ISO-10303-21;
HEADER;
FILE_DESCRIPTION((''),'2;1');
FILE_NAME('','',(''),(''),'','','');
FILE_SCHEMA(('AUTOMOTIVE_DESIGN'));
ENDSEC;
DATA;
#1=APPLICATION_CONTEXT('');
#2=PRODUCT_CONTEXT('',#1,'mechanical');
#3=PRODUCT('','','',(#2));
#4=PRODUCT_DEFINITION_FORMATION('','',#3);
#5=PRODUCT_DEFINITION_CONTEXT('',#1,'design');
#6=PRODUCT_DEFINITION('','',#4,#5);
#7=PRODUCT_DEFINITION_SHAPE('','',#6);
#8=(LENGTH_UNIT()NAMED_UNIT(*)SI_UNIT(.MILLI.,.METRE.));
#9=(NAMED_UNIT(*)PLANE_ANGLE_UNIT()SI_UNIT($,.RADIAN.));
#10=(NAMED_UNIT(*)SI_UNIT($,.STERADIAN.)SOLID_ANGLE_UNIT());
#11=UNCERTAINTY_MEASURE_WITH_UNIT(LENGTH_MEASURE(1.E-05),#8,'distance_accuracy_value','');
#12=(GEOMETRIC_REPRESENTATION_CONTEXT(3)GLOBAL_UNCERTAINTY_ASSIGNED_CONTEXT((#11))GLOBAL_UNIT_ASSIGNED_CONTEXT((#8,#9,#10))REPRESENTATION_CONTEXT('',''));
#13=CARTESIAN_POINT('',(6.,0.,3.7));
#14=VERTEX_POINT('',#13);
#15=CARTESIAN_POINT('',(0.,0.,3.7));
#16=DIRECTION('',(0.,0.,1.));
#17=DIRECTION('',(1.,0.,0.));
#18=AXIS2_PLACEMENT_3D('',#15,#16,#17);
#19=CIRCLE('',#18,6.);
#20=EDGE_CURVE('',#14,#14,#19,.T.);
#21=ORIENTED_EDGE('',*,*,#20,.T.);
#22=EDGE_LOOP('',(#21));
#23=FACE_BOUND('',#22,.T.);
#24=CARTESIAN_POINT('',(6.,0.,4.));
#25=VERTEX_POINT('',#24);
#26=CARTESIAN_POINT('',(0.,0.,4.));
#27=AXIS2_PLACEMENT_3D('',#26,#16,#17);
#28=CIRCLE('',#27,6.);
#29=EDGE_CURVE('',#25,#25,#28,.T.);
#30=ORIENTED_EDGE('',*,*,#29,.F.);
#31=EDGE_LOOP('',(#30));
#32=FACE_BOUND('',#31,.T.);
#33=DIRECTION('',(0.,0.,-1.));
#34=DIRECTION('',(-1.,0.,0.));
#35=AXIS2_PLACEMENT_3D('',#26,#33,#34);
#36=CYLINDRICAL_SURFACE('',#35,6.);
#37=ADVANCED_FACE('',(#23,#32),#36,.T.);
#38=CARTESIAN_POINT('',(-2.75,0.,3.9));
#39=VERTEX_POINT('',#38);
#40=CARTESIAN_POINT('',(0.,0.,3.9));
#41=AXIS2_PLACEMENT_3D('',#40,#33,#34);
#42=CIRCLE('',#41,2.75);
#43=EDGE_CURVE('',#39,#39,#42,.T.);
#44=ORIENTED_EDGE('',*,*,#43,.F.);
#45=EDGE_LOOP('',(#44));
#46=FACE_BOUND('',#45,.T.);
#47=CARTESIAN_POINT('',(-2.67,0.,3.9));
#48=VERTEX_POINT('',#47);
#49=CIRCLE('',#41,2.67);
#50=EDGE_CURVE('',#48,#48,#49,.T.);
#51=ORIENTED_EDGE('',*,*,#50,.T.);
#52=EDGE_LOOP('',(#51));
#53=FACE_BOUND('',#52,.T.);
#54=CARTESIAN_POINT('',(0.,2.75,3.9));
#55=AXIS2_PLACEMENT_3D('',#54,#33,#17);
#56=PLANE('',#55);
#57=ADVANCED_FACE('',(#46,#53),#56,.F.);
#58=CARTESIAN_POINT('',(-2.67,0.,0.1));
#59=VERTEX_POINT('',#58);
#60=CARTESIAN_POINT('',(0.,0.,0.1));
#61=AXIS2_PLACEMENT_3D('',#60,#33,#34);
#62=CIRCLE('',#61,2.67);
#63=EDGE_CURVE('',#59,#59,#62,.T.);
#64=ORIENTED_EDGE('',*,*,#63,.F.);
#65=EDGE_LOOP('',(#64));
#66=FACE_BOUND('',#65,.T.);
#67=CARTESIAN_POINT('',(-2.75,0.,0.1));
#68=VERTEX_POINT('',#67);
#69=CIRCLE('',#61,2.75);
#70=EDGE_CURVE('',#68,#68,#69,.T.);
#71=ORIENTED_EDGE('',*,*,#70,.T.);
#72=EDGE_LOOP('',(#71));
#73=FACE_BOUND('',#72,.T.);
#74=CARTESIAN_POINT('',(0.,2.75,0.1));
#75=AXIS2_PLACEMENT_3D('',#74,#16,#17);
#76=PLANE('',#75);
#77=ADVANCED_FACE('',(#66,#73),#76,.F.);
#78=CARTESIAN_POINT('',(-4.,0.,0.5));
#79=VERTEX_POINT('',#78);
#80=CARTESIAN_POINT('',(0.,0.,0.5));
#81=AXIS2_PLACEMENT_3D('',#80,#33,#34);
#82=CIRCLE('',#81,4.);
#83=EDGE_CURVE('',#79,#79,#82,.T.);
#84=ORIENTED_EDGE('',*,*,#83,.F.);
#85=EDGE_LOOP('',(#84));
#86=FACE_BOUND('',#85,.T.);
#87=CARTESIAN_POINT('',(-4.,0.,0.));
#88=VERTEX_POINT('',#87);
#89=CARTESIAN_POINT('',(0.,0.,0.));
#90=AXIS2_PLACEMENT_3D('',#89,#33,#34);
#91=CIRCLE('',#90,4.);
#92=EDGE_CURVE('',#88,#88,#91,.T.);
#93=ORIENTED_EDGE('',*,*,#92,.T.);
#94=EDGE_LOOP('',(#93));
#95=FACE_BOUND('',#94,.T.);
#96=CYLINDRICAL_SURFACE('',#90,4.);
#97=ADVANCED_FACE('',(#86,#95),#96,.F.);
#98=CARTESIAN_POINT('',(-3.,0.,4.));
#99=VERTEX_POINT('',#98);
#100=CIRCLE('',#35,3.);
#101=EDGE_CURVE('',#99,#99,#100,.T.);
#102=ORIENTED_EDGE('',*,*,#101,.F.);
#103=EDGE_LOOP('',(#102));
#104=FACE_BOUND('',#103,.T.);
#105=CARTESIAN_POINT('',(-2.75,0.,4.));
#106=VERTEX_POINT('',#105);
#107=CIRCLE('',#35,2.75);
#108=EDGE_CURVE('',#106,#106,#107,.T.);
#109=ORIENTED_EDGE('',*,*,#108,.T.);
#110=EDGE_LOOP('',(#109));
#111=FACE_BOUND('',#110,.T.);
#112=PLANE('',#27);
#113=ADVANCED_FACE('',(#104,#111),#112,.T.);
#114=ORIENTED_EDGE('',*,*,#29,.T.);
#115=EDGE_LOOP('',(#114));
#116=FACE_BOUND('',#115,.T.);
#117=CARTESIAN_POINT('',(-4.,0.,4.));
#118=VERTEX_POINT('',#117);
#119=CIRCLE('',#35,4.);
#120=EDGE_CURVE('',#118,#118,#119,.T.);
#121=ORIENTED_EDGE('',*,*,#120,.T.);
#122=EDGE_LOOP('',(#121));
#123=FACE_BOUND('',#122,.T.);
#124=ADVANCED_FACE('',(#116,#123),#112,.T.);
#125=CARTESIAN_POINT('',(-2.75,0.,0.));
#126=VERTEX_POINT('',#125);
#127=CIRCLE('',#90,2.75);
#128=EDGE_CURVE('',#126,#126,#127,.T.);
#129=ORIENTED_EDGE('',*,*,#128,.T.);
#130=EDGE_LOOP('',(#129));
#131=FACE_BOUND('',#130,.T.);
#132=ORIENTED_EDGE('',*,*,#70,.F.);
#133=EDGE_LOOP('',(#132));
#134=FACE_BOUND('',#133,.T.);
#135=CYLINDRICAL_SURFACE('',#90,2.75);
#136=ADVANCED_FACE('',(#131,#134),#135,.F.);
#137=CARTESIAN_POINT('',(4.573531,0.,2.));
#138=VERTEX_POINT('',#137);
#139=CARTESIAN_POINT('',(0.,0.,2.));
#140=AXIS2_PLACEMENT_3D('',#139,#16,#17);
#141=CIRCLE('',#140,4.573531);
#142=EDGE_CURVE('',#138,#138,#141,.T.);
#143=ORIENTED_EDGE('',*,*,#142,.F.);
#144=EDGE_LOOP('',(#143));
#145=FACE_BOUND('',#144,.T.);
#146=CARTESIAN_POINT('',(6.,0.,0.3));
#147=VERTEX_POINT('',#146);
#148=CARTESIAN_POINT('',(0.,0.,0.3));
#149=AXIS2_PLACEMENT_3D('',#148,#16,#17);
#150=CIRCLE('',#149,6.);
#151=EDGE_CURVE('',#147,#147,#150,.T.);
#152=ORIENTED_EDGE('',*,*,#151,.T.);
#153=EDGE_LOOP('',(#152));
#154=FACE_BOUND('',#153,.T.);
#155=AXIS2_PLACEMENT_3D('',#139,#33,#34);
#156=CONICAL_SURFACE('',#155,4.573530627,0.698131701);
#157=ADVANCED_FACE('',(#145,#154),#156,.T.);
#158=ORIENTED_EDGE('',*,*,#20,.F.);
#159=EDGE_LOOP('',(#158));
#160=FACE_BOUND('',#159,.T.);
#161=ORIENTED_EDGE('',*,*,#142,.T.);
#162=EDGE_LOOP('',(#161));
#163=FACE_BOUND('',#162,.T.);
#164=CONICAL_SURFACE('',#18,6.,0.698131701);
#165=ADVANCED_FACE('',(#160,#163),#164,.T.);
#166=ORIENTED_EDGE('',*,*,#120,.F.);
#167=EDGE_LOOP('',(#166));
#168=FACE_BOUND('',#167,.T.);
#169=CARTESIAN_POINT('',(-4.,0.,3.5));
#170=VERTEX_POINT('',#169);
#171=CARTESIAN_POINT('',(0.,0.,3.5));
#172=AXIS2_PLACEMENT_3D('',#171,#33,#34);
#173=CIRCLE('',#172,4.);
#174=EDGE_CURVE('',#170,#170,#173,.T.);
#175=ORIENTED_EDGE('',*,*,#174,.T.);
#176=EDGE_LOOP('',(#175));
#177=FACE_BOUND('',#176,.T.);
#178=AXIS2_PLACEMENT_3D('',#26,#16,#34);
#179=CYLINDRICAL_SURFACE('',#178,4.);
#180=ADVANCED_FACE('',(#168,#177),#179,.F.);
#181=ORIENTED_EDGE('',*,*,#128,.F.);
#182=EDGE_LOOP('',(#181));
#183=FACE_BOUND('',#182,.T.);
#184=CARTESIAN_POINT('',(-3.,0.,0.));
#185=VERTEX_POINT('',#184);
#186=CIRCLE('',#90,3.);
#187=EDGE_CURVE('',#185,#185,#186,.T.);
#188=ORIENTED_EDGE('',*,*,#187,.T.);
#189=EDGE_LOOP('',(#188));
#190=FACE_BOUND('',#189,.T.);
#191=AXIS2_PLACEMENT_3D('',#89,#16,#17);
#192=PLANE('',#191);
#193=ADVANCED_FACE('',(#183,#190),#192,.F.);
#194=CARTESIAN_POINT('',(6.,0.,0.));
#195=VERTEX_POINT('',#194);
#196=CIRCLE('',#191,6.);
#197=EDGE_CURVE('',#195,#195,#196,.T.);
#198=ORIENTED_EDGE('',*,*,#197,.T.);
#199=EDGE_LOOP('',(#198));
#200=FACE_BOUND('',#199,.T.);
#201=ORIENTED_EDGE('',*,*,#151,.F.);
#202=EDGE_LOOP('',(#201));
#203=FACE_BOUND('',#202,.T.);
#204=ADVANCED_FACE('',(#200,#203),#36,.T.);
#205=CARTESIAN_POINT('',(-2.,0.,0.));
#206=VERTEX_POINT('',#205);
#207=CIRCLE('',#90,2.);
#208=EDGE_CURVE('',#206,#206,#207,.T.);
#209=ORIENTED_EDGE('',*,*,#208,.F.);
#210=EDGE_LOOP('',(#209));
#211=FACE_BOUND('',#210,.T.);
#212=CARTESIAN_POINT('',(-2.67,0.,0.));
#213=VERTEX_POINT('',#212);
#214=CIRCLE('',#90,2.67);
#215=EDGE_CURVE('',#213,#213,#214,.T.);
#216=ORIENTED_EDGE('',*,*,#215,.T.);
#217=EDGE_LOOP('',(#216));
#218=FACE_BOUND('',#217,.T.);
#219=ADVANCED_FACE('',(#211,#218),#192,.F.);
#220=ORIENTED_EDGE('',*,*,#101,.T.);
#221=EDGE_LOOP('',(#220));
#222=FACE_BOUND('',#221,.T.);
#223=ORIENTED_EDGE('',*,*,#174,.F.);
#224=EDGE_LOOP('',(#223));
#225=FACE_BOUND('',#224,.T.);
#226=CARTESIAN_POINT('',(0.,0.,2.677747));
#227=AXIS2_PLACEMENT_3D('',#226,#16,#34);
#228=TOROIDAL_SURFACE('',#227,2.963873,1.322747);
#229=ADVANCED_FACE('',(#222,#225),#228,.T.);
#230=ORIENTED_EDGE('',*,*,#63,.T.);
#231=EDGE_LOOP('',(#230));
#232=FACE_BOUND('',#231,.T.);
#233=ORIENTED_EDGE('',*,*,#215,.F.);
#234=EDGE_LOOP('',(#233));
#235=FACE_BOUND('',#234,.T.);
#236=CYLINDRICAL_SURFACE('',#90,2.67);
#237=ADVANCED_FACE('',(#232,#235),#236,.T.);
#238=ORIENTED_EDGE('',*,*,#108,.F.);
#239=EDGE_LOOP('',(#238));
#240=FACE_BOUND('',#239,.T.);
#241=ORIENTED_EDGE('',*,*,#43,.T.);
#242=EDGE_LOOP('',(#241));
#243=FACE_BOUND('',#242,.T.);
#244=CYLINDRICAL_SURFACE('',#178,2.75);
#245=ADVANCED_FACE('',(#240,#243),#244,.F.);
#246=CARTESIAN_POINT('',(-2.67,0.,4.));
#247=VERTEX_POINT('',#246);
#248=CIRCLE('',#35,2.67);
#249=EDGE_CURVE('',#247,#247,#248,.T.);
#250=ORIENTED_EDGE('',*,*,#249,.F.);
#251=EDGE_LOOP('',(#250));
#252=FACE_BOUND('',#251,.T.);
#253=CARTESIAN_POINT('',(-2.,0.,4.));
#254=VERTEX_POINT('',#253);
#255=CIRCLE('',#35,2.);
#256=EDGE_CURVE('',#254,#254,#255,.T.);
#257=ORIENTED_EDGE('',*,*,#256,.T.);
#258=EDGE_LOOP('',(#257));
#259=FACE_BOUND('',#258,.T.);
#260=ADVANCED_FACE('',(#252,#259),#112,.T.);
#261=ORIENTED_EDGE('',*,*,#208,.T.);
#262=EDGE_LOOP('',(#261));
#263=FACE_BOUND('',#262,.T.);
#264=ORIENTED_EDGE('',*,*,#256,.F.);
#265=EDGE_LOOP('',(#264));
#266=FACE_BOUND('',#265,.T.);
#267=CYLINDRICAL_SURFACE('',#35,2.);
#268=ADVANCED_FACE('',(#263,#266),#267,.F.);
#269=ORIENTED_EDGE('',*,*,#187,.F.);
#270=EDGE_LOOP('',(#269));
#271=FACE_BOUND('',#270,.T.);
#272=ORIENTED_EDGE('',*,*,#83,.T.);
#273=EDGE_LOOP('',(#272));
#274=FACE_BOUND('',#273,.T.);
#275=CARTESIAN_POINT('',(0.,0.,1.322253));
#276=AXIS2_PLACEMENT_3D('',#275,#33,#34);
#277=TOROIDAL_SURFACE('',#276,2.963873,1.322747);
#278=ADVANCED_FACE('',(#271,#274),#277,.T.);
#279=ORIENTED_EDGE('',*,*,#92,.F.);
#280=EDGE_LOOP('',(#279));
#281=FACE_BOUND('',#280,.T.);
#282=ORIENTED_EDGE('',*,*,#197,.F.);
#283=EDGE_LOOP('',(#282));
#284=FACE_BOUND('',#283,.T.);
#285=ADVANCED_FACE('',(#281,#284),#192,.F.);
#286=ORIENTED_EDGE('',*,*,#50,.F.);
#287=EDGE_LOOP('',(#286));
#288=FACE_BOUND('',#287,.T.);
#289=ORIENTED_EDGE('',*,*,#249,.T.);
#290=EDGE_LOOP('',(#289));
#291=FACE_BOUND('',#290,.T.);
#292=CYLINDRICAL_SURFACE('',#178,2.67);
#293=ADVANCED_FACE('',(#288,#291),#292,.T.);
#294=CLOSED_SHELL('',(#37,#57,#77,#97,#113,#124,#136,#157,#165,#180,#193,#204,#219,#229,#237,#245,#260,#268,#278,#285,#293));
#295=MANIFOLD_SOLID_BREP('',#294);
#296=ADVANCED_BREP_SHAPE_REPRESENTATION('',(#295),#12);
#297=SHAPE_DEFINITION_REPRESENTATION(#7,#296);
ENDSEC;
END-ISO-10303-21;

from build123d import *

# Parameters (mm, degrees)
SKETCH_3_R        = 6
EXTRUDE_1_DEPTH   = 4
OTHER_1_OUTLINE_R = 2
OTHER_1_DEPTH     = 4
SKETCH_14_W       = 0.1
SKETCH_14_H       = 0.08


# Read off the part's stored shape, not the designer's step: 孔1
with BuildPart() as part:
    # 草图3 → 凸台-拉伸1 (new body)
    with BuildSketch(Plane.XY):
        Circle(SKETCH_3_R)
    extrude(amount=EXTRUDE_1_DEPTH)

    # 孔1 outline → 孔1 (cut)
    with BuildSketch(Plane.XY):
        Circle(OTHER_1_OUTLINE_R)
    extrude(amount=OTHER_1_DEPTH, mode=Mode.SUBTRACT)

    # 草图11 → 切除-旋转1 (revolve, cut)
    with BuildSketch(Plane(origin=(0, 0, 0), x_dir=(0, 0, -1), z_dir=(1, 0, 0)), mode=Mode.PRIVATE) as cut_revolve_1_sk:
        Polygon((-0.3, 6), (-3.7, 6), (-2, 4.573530627), align=None)
    revolve(cut_revolve_1_sk.sketch.rotate(Axis((0, 0, 4.816901408), (0, 0, -1)), 90), axis=Axis((0, 0, 4.816901408), (0, 0, -1)), mode=Mode.SUBTRACT)

    # 草图12 → 切除-旋转2 (revolve, cut)
    with BuildSketch(Plane(origin=(0, 0, 0), x_dir=(0, 0, -1), z_dir=(1, 0, 0)), mode=Mode.PRIVATE) as cut_revolve_2_sk:
        with BuildLine():
            Line((0, 4), (-0.5, 4))
            ThreePointArc((-0.5, 4), (-0.139152669, 3.555423666), (0, 3))
            Line((0, 3), (0, 4))
        make_face()
    cut_revolve_2 = revolve(cut_revolve_2_sk.sketch.rotate(Axis((0, 0, 0), (0, 0, 1)), 90), axis=Axis((0, 0, 0), (0, 0, 1)), mode=Mode.SUBTRACT)

    # 镜向1: 切除-旋转2 across plane
    add(cut_revolve_2.mirror(Plane.XY.offset(2)), mode=Mode.SUBTRACT)

    # 草图14 → 切除-旋转3 (revolve, cut)
    with BuildSketch(Plane(origin=(0, 0, 0), x_dir=(0, 0, -1), z_dir=(1, 0, 0)), mode=Mode.PRIVATE) as cut_revolve_3_sk:
        with Locations((-0.05, 2.71)):
            Rectangle(SKETCH_14_W, SKETCH_14_H)
    cut_revolve_3 = revolve(cut_revolve_3_sk.sketch.rotate(Axis((0, 0, 0), (0, 0, 1)), 90), axis=Axis((0, 0, 0), (0, 0, 1)), mode=Mode.SUBTRACT)

    # 镜向2: 切除-旋转3 across plane
    add(cut_revolve_3.mirror(Plane.XY.offset(2)), mode=Mode.SUBTRACT)


solid = part.part
